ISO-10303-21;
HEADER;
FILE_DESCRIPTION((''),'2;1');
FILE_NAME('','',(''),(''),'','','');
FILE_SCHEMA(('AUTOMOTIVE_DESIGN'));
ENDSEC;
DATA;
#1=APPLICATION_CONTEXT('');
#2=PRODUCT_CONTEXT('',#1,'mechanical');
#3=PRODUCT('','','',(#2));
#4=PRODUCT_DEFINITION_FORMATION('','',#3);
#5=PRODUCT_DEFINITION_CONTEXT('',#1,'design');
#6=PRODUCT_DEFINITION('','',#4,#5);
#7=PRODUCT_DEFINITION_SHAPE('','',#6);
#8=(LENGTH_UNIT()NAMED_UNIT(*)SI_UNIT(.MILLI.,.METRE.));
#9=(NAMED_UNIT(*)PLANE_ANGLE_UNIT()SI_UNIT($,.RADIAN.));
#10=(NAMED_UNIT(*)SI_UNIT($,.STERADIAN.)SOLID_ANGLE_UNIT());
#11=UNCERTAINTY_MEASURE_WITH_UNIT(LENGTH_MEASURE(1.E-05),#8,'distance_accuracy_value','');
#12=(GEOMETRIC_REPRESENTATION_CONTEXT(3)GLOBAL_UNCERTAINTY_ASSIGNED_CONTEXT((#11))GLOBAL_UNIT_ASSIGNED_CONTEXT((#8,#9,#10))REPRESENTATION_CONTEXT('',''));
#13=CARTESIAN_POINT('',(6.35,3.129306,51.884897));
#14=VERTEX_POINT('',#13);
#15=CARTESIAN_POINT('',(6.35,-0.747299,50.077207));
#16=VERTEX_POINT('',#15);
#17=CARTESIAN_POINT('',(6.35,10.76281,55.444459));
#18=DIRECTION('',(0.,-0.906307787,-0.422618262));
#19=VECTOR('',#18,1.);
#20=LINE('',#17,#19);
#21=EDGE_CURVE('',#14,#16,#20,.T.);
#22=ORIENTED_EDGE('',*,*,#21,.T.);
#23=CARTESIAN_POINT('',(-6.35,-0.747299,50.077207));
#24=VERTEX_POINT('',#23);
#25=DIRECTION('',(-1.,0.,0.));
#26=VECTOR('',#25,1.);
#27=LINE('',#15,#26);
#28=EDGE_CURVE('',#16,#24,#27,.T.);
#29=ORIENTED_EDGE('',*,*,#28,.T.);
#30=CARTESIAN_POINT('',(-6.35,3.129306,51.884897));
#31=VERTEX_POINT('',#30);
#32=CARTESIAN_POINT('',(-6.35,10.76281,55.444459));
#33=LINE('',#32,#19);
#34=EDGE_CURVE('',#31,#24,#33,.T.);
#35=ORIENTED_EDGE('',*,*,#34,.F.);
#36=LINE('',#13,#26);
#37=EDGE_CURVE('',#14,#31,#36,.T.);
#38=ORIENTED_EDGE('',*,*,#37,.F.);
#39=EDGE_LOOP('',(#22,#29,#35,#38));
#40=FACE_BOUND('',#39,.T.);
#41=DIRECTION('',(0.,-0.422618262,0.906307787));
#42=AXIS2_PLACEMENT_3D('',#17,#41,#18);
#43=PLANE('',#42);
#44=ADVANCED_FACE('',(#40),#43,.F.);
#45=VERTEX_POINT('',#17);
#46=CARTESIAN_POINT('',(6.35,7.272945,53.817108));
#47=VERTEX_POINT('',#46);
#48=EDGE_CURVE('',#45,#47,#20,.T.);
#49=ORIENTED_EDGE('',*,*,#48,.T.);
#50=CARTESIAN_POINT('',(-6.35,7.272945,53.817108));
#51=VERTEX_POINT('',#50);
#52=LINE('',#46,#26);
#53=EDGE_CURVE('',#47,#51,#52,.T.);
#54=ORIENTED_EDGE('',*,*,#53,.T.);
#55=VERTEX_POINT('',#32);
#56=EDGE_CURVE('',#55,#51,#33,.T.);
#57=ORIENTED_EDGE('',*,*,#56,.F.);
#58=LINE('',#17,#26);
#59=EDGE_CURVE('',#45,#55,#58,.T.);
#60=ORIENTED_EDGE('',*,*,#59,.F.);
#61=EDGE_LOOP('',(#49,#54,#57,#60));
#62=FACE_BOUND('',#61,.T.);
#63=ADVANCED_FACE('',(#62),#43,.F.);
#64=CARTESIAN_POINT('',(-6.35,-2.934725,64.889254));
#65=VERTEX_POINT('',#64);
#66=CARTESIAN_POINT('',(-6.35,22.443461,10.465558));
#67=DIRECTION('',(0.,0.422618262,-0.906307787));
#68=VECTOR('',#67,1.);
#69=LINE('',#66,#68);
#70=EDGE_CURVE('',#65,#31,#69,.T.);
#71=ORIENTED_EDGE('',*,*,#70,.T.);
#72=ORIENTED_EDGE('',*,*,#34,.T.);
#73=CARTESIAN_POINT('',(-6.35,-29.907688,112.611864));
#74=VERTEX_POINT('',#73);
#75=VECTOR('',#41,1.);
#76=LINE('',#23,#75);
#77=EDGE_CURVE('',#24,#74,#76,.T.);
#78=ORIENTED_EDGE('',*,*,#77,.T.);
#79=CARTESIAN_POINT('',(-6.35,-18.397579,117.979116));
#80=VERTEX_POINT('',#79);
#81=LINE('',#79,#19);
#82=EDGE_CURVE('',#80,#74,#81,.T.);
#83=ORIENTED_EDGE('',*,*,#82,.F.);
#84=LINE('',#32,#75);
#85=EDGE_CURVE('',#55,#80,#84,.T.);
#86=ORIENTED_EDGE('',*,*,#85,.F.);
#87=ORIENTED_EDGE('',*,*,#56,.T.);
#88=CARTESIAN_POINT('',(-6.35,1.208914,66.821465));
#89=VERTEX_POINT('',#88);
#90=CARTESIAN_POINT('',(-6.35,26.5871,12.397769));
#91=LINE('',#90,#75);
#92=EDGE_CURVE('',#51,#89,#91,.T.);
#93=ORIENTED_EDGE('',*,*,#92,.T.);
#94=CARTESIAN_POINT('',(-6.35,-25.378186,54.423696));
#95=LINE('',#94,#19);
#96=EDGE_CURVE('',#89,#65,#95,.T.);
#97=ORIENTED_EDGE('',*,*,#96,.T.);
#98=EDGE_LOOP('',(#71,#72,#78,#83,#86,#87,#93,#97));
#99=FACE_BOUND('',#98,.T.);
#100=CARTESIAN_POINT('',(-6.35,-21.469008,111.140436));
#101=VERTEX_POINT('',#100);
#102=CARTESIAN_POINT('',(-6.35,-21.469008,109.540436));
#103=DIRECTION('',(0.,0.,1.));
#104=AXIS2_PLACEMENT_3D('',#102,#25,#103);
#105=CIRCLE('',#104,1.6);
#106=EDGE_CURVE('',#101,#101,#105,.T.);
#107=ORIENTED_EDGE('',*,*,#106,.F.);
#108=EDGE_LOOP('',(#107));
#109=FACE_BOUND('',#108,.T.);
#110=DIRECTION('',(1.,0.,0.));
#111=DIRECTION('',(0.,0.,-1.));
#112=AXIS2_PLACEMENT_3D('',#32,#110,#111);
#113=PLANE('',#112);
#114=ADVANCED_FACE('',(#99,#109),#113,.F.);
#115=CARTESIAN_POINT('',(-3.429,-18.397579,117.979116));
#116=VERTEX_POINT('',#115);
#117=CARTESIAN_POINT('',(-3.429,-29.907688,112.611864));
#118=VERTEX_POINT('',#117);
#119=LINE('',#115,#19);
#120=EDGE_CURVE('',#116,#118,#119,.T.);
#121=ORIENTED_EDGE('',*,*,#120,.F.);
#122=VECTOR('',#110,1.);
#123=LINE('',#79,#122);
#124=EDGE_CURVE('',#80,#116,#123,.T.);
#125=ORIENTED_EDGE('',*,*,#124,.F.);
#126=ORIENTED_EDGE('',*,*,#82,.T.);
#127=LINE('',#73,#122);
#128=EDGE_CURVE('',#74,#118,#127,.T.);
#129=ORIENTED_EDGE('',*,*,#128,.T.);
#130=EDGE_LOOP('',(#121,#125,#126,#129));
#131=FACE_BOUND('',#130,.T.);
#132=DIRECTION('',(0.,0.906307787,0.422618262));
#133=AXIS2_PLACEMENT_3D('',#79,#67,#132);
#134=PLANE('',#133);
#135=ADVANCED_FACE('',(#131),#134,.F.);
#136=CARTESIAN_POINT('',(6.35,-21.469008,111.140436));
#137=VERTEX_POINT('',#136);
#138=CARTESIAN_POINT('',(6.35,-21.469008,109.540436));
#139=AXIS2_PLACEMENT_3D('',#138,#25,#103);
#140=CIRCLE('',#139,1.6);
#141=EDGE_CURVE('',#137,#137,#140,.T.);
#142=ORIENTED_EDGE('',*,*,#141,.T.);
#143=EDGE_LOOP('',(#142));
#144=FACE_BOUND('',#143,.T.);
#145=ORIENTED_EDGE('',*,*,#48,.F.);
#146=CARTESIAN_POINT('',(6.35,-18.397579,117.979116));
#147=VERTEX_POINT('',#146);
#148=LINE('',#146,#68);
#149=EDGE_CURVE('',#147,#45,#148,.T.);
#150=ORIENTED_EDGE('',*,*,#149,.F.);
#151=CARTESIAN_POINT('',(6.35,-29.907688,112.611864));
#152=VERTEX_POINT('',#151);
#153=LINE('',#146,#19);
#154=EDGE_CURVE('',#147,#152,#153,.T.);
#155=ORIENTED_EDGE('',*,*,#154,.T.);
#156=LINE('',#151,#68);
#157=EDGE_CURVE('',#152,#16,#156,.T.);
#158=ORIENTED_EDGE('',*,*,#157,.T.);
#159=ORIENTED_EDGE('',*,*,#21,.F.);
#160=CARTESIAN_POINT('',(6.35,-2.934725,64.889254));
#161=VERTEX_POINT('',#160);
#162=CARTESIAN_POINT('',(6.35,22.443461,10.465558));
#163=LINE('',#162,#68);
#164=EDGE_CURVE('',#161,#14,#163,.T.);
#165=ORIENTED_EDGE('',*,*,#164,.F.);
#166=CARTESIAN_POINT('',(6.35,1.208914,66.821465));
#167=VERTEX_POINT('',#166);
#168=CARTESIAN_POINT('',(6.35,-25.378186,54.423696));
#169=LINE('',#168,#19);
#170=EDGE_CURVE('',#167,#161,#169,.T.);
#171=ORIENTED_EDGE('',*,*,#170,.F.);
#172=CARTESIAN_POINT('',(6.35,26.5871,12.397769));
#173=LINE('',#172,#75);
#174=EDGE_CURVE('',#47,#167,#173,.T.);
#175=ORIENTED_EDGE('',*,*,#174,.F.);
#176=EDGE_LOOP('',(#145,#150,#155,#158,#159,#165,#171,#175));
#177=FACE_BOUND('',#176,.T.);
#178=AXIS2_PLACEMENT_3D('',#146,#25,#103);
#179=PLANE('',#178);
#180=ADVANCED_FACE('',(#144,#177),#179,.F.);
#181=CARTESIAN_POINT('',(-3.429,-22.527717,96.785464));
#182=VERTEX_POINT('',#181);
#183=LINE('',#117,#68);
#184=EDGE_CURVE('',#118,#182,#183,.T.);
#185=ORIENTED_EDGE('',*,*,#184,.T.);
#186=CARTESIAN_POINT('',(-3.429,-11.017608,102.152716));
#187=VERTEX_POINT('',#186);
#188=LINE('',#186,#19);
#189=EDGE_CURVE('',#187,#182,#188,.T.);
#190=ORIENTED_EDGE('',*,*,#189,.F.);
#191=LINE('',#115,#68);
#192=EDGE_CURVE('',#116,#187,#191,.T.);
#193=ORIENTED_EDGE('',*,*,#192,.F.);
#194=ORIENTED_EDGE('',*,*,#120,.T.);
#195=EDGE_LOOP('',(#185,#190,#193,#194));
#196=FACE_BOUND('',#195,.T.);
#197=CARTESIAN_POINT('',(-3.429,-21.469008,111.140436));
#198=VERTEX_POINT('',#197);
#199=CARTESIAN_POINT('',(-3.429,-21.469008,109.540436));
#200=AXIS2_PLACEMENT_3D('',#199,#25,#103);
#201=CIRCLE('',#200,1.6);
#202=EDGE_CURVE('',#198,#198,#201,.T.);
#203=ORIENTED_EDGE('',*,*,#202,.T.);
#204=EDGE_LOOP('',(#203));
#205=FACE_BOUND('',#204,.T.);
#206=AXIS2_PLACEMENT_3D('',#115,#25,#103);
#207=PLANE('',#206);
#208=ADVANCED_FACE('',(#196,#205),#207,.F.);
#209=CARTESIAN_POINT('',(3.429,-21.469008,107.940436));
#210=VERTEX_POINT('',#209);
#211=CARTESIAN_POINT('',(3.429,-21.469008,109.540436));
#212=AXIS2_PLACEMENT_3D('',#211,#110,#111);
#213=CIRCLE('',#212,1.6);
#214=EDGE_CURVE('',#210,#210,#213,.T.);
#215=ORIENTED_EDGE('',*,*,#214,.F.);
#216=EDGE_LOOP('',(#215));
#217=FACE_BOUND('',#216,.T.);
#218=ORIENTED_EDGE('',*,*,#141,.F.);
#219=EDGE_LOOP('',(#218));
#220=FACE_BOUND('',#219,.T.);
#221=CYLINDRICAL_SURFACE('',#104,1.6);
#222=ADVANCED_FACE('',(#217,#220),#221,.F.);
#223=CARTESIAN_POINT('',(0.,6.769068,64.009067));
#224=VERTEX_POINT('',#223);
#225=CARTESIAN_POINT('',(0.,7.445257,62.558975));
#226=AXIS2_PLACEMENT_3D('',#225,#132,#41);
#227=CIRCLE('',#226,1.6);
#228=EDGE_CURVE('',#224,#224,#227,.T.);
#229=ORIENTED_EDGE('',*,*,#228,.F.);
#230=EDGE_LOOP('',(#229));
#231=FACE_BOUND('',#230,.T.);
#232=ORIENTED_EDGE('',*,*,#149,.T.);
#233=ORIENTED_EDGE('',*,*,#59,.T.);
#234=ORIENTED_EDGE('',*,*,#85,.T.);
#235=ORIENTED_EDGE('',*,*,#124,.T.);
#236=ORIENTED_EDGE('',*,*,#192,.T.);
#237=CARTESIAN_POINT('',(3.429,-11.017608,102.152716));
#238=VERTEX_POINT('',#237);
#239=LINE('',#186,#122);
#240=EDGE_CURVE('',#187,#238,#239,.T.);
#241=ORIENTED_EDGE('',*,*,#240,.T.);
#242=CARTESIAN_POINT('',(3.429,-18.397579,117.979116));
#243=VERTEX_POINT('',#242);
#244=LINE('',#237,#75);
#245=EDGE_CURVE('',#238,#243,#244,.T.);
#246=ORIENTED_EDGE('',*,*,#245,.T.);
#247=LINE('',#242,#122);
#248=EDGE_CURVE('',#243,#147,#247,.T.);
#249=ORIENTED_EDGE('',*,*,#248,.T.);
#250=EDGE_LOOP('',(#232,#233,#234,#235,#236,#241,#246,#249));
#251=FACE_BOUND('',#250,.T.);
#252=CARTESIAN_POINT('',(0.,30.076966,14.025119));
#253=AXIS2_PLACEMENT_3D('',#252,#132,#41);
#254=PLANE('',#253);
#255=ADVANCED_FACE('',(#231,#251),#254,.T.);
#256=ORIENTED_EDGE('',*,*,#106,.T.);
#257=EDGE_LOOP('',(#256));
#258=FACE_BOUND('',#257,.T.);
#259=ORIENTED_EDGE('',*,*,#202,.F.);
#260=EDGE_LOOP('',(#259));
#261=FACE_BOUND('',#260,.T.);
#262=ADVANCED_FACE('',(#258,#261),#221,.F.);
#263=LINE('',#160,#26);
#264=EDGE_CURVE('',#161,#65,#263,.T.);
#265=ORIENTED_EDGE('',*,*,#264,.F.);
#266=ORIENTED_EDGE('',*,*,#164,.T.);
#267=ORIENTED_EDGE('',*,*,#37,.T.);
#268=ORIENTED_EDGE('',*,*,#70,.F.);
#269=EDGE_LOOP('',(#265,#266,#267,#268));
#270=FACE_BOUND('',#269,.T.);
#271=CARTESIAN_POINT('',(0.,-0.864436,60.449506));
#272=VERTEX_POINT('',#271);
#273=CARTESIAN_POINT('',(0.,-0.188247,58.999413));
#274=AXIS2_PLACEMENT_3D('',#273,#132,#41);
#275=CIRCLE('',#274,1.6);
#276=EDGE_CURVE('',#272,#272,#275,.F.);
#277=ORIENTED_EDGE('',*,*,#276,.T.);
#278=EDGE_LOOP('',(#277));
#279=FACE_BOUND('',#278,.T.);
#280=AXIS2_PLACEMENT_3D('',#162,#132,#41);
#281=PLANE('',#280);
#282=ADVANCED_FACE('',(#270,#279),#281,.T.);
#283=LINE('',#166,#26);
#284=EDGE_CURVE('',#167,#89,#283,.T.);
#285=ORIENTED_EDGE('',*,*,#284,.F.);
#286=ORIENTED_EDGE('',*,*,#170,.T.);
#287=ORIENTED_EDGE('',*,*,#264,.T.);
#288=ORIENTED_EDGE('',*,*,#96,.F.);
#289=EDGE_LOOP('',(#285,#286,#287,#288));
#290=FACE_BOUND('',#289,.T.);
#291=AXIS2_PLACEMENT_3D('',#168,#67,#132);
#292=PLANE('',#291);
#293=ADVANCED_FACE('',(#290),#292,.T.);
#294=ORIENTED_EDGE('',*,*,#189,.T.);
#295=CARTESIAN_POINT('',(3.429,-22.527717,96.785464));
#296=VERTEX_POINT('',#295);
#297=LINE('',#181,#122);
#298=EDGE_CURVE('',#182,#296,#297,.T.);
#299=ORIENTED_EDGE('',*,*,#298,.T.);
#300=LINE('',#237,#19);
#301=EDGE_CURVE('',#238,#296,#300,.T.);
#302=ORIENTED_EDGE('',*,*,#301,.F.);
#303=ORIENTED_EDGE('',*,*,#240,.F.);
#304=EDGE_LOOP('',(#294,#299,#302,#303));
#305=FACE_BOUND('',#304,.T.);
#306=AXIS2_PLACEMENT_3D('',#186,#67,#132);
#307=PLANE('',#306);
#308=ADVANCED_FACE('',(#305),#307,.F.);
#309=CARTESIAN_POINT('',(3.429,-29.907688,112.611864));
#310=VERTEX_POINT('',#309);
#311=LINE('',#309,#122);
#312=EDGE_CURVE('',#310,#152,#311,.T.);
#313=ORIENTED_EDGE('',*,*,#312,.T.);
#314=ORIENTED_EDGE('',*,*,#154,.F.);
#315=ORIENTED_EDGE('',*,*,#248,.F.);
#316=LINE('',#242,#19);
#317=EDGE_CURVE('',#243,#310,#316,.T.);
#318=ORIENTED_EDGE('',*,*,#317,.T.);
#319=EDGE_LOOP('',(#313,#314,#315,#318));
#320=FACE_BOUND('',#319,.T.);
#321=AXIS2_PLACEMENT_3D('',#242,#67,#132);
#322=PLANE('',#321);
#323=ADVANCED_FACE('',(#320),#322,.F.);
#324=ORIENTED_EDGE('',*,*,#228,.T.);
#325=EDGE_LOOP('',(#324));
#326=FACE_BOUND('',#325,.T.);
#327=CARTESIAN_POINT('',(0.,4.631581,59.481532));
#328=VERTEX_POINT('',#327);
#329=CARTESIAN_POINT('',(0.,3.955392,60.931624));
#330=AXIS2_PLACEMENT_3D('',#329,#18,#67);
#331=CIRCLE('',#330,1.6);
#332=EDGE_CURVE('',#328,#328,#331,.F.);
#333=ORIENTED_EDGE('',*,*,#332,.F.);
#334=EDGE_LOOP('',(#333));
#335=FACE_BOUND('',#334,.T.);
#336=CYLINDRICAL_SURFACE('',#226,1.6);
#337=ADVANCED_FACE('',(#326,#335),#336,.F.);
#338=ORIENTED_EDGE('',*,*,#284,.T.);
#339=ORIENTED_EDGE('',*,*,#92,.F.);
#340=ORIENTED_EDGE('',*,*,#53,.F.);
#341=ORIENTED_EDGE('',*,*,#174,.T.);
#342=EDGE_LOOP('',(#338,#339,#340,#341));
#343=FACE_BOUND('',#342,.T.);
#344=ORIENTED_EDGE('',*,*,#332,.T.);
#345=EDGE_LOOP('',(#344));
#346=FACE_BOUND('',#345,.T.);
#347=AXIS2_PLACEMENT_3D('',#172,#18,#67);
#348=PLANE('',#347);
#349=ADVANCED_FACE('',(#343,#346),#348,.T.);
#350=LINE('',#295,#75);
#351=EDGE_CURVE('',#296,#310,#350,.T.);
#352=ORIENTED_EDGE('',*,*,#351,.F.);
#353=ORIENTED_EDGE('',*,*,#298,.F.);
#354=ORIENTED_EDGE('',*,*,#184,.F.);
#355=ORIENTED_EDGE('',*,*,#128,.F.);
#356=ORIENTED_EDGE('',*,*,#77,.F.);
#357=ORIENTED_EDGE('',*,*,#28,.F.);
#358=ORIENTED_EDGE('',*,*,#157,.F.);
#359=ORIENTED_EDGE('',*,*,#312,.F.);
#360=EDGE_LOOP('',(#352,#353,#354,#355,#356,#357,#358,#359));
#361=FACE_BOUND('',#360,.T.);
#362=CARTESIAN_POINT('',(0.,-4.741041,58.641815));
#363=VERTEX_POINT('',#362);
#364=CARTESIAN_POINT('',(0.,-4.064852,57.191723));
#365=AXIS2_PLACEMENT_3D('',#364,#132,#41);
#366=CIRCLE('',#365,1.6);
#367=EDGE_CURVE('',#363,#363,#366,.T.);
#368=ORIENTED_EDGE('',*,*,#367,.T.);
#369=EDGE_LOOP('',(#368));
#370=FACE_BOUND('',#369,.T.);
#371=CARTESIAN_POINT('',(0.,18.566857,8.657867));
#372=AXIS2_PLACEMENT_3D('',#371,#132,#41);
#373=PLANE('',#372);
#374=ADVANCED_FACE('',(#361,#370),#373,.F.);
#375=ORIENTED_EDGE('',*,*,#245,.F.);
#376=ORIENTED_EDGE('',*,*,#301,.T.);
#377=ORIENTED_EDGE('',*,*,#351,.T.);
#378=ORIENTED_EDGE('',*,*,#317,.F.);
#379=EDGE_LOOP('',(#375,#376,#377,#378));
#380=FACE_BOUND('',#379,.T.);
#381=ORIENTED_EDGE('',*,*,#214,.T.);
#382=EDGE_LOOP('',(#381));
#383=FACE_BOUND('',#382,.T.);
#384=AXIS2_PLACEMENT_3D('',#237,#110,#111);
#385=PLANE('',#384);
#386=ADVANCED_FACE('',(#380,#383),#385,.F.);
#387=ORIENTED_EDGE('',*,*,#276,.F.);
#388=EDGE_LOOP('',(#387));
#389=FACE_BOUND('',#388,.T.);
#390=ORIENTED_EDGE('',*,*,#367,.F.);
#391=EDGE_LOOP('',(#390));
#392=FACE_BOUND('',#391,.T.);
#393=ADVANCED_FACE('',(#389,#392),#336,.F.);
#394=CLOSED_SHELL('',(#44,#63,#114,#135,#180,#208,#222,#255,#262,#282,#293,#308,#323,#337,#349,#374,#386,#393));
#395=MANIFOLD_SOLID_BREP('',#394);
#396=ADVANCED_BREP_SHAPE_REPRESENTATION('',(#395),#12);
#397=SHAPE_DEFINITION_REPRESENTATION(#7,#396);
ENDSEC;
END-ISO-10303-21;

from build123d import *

# Parameters (mm, degrees)
BOSS_EXTRUDE5_START                  = -6.35
BOSS_EXTRUDE5_DEPTH                  = 12.7
M3_CLEARANCE_HOLE2_D                 = 3.2
CUT_EXTRUDE2_DEPTH                   = 12.7
BALL_START                           = -6.35
BALL_BALANCER_MASTER_MODEL_OUTLINE_R = 1.6
BALL_BALANCER_MASTER_MODEL_DEPTH     = 12.7


# Read off the part's stored shape, not the designer's step: Ball Balancer Master Model
with BuildPart() as part:
    # Sketch20 → Boss-Extrude5 (new body)
    with BuildSketch(Plane(origin=(0, 24.321911069, 11.341493392), x_dir=(0, -0.4226182617407002, 0.9063077870366497), z_dir=(0, 0.9063077870366496, 0.42261826174070016)).offset(BOSS_EXTRUDE5_START)):
        Polygon((114.700544477, -3.429), (97.238044477, -3.429), (97.238044477, 3.429), (114.700544477, 3.429), (114.700544477, 6.35), (45.701184477, 6.35), (45.701184477, -6.35), (114.700544477, -6.35), align=None)
    extrude(amount=BOSS_EXTRUDE5_DEPTH)

    # M3 Clearance Hole2 (through all)
    with Locations(Plane(origin=(0, 30.076965517, 14.025119355), x_dir=(1, 0, 0), z_dir=(0, 0.9063077870366494, 0.42261826174070066))):
        with Locations((0, -53.551184477)):
            Hole(M3_CLEARANCE_HOLE2_D / 2)

    # Sketch21 → Cut-Extrude2 (cut)
    with BuildSketch(Plane.ZY.offset(6.35)):
        Polygon((66.821464609, 1.208914252), (53.817107939, 7.272945357), (51.884897247, 3.129306154), (64.889253917, -2.93472495), align=None)
    extrude(amount=-CUT_EXTRUDE2_DEPTH, mode=Mode.SUBTRACT)

    # Ball Balancer Master Model outline → Ball Balancer Master Model (cut)
    with BuildSketch(Plane.YZ.offset(BALL_START)):
        with Locations((-21.469007696, 109.540435581)):
            Circle(BALL_BALANCER_MASTER_MODEL_OUTLINE_R)
    extrude(amount=BALL_BALANCER_MASTER_MODEL_DEPTH, mode=Mode.SUBTRACT)


solid = part.part
